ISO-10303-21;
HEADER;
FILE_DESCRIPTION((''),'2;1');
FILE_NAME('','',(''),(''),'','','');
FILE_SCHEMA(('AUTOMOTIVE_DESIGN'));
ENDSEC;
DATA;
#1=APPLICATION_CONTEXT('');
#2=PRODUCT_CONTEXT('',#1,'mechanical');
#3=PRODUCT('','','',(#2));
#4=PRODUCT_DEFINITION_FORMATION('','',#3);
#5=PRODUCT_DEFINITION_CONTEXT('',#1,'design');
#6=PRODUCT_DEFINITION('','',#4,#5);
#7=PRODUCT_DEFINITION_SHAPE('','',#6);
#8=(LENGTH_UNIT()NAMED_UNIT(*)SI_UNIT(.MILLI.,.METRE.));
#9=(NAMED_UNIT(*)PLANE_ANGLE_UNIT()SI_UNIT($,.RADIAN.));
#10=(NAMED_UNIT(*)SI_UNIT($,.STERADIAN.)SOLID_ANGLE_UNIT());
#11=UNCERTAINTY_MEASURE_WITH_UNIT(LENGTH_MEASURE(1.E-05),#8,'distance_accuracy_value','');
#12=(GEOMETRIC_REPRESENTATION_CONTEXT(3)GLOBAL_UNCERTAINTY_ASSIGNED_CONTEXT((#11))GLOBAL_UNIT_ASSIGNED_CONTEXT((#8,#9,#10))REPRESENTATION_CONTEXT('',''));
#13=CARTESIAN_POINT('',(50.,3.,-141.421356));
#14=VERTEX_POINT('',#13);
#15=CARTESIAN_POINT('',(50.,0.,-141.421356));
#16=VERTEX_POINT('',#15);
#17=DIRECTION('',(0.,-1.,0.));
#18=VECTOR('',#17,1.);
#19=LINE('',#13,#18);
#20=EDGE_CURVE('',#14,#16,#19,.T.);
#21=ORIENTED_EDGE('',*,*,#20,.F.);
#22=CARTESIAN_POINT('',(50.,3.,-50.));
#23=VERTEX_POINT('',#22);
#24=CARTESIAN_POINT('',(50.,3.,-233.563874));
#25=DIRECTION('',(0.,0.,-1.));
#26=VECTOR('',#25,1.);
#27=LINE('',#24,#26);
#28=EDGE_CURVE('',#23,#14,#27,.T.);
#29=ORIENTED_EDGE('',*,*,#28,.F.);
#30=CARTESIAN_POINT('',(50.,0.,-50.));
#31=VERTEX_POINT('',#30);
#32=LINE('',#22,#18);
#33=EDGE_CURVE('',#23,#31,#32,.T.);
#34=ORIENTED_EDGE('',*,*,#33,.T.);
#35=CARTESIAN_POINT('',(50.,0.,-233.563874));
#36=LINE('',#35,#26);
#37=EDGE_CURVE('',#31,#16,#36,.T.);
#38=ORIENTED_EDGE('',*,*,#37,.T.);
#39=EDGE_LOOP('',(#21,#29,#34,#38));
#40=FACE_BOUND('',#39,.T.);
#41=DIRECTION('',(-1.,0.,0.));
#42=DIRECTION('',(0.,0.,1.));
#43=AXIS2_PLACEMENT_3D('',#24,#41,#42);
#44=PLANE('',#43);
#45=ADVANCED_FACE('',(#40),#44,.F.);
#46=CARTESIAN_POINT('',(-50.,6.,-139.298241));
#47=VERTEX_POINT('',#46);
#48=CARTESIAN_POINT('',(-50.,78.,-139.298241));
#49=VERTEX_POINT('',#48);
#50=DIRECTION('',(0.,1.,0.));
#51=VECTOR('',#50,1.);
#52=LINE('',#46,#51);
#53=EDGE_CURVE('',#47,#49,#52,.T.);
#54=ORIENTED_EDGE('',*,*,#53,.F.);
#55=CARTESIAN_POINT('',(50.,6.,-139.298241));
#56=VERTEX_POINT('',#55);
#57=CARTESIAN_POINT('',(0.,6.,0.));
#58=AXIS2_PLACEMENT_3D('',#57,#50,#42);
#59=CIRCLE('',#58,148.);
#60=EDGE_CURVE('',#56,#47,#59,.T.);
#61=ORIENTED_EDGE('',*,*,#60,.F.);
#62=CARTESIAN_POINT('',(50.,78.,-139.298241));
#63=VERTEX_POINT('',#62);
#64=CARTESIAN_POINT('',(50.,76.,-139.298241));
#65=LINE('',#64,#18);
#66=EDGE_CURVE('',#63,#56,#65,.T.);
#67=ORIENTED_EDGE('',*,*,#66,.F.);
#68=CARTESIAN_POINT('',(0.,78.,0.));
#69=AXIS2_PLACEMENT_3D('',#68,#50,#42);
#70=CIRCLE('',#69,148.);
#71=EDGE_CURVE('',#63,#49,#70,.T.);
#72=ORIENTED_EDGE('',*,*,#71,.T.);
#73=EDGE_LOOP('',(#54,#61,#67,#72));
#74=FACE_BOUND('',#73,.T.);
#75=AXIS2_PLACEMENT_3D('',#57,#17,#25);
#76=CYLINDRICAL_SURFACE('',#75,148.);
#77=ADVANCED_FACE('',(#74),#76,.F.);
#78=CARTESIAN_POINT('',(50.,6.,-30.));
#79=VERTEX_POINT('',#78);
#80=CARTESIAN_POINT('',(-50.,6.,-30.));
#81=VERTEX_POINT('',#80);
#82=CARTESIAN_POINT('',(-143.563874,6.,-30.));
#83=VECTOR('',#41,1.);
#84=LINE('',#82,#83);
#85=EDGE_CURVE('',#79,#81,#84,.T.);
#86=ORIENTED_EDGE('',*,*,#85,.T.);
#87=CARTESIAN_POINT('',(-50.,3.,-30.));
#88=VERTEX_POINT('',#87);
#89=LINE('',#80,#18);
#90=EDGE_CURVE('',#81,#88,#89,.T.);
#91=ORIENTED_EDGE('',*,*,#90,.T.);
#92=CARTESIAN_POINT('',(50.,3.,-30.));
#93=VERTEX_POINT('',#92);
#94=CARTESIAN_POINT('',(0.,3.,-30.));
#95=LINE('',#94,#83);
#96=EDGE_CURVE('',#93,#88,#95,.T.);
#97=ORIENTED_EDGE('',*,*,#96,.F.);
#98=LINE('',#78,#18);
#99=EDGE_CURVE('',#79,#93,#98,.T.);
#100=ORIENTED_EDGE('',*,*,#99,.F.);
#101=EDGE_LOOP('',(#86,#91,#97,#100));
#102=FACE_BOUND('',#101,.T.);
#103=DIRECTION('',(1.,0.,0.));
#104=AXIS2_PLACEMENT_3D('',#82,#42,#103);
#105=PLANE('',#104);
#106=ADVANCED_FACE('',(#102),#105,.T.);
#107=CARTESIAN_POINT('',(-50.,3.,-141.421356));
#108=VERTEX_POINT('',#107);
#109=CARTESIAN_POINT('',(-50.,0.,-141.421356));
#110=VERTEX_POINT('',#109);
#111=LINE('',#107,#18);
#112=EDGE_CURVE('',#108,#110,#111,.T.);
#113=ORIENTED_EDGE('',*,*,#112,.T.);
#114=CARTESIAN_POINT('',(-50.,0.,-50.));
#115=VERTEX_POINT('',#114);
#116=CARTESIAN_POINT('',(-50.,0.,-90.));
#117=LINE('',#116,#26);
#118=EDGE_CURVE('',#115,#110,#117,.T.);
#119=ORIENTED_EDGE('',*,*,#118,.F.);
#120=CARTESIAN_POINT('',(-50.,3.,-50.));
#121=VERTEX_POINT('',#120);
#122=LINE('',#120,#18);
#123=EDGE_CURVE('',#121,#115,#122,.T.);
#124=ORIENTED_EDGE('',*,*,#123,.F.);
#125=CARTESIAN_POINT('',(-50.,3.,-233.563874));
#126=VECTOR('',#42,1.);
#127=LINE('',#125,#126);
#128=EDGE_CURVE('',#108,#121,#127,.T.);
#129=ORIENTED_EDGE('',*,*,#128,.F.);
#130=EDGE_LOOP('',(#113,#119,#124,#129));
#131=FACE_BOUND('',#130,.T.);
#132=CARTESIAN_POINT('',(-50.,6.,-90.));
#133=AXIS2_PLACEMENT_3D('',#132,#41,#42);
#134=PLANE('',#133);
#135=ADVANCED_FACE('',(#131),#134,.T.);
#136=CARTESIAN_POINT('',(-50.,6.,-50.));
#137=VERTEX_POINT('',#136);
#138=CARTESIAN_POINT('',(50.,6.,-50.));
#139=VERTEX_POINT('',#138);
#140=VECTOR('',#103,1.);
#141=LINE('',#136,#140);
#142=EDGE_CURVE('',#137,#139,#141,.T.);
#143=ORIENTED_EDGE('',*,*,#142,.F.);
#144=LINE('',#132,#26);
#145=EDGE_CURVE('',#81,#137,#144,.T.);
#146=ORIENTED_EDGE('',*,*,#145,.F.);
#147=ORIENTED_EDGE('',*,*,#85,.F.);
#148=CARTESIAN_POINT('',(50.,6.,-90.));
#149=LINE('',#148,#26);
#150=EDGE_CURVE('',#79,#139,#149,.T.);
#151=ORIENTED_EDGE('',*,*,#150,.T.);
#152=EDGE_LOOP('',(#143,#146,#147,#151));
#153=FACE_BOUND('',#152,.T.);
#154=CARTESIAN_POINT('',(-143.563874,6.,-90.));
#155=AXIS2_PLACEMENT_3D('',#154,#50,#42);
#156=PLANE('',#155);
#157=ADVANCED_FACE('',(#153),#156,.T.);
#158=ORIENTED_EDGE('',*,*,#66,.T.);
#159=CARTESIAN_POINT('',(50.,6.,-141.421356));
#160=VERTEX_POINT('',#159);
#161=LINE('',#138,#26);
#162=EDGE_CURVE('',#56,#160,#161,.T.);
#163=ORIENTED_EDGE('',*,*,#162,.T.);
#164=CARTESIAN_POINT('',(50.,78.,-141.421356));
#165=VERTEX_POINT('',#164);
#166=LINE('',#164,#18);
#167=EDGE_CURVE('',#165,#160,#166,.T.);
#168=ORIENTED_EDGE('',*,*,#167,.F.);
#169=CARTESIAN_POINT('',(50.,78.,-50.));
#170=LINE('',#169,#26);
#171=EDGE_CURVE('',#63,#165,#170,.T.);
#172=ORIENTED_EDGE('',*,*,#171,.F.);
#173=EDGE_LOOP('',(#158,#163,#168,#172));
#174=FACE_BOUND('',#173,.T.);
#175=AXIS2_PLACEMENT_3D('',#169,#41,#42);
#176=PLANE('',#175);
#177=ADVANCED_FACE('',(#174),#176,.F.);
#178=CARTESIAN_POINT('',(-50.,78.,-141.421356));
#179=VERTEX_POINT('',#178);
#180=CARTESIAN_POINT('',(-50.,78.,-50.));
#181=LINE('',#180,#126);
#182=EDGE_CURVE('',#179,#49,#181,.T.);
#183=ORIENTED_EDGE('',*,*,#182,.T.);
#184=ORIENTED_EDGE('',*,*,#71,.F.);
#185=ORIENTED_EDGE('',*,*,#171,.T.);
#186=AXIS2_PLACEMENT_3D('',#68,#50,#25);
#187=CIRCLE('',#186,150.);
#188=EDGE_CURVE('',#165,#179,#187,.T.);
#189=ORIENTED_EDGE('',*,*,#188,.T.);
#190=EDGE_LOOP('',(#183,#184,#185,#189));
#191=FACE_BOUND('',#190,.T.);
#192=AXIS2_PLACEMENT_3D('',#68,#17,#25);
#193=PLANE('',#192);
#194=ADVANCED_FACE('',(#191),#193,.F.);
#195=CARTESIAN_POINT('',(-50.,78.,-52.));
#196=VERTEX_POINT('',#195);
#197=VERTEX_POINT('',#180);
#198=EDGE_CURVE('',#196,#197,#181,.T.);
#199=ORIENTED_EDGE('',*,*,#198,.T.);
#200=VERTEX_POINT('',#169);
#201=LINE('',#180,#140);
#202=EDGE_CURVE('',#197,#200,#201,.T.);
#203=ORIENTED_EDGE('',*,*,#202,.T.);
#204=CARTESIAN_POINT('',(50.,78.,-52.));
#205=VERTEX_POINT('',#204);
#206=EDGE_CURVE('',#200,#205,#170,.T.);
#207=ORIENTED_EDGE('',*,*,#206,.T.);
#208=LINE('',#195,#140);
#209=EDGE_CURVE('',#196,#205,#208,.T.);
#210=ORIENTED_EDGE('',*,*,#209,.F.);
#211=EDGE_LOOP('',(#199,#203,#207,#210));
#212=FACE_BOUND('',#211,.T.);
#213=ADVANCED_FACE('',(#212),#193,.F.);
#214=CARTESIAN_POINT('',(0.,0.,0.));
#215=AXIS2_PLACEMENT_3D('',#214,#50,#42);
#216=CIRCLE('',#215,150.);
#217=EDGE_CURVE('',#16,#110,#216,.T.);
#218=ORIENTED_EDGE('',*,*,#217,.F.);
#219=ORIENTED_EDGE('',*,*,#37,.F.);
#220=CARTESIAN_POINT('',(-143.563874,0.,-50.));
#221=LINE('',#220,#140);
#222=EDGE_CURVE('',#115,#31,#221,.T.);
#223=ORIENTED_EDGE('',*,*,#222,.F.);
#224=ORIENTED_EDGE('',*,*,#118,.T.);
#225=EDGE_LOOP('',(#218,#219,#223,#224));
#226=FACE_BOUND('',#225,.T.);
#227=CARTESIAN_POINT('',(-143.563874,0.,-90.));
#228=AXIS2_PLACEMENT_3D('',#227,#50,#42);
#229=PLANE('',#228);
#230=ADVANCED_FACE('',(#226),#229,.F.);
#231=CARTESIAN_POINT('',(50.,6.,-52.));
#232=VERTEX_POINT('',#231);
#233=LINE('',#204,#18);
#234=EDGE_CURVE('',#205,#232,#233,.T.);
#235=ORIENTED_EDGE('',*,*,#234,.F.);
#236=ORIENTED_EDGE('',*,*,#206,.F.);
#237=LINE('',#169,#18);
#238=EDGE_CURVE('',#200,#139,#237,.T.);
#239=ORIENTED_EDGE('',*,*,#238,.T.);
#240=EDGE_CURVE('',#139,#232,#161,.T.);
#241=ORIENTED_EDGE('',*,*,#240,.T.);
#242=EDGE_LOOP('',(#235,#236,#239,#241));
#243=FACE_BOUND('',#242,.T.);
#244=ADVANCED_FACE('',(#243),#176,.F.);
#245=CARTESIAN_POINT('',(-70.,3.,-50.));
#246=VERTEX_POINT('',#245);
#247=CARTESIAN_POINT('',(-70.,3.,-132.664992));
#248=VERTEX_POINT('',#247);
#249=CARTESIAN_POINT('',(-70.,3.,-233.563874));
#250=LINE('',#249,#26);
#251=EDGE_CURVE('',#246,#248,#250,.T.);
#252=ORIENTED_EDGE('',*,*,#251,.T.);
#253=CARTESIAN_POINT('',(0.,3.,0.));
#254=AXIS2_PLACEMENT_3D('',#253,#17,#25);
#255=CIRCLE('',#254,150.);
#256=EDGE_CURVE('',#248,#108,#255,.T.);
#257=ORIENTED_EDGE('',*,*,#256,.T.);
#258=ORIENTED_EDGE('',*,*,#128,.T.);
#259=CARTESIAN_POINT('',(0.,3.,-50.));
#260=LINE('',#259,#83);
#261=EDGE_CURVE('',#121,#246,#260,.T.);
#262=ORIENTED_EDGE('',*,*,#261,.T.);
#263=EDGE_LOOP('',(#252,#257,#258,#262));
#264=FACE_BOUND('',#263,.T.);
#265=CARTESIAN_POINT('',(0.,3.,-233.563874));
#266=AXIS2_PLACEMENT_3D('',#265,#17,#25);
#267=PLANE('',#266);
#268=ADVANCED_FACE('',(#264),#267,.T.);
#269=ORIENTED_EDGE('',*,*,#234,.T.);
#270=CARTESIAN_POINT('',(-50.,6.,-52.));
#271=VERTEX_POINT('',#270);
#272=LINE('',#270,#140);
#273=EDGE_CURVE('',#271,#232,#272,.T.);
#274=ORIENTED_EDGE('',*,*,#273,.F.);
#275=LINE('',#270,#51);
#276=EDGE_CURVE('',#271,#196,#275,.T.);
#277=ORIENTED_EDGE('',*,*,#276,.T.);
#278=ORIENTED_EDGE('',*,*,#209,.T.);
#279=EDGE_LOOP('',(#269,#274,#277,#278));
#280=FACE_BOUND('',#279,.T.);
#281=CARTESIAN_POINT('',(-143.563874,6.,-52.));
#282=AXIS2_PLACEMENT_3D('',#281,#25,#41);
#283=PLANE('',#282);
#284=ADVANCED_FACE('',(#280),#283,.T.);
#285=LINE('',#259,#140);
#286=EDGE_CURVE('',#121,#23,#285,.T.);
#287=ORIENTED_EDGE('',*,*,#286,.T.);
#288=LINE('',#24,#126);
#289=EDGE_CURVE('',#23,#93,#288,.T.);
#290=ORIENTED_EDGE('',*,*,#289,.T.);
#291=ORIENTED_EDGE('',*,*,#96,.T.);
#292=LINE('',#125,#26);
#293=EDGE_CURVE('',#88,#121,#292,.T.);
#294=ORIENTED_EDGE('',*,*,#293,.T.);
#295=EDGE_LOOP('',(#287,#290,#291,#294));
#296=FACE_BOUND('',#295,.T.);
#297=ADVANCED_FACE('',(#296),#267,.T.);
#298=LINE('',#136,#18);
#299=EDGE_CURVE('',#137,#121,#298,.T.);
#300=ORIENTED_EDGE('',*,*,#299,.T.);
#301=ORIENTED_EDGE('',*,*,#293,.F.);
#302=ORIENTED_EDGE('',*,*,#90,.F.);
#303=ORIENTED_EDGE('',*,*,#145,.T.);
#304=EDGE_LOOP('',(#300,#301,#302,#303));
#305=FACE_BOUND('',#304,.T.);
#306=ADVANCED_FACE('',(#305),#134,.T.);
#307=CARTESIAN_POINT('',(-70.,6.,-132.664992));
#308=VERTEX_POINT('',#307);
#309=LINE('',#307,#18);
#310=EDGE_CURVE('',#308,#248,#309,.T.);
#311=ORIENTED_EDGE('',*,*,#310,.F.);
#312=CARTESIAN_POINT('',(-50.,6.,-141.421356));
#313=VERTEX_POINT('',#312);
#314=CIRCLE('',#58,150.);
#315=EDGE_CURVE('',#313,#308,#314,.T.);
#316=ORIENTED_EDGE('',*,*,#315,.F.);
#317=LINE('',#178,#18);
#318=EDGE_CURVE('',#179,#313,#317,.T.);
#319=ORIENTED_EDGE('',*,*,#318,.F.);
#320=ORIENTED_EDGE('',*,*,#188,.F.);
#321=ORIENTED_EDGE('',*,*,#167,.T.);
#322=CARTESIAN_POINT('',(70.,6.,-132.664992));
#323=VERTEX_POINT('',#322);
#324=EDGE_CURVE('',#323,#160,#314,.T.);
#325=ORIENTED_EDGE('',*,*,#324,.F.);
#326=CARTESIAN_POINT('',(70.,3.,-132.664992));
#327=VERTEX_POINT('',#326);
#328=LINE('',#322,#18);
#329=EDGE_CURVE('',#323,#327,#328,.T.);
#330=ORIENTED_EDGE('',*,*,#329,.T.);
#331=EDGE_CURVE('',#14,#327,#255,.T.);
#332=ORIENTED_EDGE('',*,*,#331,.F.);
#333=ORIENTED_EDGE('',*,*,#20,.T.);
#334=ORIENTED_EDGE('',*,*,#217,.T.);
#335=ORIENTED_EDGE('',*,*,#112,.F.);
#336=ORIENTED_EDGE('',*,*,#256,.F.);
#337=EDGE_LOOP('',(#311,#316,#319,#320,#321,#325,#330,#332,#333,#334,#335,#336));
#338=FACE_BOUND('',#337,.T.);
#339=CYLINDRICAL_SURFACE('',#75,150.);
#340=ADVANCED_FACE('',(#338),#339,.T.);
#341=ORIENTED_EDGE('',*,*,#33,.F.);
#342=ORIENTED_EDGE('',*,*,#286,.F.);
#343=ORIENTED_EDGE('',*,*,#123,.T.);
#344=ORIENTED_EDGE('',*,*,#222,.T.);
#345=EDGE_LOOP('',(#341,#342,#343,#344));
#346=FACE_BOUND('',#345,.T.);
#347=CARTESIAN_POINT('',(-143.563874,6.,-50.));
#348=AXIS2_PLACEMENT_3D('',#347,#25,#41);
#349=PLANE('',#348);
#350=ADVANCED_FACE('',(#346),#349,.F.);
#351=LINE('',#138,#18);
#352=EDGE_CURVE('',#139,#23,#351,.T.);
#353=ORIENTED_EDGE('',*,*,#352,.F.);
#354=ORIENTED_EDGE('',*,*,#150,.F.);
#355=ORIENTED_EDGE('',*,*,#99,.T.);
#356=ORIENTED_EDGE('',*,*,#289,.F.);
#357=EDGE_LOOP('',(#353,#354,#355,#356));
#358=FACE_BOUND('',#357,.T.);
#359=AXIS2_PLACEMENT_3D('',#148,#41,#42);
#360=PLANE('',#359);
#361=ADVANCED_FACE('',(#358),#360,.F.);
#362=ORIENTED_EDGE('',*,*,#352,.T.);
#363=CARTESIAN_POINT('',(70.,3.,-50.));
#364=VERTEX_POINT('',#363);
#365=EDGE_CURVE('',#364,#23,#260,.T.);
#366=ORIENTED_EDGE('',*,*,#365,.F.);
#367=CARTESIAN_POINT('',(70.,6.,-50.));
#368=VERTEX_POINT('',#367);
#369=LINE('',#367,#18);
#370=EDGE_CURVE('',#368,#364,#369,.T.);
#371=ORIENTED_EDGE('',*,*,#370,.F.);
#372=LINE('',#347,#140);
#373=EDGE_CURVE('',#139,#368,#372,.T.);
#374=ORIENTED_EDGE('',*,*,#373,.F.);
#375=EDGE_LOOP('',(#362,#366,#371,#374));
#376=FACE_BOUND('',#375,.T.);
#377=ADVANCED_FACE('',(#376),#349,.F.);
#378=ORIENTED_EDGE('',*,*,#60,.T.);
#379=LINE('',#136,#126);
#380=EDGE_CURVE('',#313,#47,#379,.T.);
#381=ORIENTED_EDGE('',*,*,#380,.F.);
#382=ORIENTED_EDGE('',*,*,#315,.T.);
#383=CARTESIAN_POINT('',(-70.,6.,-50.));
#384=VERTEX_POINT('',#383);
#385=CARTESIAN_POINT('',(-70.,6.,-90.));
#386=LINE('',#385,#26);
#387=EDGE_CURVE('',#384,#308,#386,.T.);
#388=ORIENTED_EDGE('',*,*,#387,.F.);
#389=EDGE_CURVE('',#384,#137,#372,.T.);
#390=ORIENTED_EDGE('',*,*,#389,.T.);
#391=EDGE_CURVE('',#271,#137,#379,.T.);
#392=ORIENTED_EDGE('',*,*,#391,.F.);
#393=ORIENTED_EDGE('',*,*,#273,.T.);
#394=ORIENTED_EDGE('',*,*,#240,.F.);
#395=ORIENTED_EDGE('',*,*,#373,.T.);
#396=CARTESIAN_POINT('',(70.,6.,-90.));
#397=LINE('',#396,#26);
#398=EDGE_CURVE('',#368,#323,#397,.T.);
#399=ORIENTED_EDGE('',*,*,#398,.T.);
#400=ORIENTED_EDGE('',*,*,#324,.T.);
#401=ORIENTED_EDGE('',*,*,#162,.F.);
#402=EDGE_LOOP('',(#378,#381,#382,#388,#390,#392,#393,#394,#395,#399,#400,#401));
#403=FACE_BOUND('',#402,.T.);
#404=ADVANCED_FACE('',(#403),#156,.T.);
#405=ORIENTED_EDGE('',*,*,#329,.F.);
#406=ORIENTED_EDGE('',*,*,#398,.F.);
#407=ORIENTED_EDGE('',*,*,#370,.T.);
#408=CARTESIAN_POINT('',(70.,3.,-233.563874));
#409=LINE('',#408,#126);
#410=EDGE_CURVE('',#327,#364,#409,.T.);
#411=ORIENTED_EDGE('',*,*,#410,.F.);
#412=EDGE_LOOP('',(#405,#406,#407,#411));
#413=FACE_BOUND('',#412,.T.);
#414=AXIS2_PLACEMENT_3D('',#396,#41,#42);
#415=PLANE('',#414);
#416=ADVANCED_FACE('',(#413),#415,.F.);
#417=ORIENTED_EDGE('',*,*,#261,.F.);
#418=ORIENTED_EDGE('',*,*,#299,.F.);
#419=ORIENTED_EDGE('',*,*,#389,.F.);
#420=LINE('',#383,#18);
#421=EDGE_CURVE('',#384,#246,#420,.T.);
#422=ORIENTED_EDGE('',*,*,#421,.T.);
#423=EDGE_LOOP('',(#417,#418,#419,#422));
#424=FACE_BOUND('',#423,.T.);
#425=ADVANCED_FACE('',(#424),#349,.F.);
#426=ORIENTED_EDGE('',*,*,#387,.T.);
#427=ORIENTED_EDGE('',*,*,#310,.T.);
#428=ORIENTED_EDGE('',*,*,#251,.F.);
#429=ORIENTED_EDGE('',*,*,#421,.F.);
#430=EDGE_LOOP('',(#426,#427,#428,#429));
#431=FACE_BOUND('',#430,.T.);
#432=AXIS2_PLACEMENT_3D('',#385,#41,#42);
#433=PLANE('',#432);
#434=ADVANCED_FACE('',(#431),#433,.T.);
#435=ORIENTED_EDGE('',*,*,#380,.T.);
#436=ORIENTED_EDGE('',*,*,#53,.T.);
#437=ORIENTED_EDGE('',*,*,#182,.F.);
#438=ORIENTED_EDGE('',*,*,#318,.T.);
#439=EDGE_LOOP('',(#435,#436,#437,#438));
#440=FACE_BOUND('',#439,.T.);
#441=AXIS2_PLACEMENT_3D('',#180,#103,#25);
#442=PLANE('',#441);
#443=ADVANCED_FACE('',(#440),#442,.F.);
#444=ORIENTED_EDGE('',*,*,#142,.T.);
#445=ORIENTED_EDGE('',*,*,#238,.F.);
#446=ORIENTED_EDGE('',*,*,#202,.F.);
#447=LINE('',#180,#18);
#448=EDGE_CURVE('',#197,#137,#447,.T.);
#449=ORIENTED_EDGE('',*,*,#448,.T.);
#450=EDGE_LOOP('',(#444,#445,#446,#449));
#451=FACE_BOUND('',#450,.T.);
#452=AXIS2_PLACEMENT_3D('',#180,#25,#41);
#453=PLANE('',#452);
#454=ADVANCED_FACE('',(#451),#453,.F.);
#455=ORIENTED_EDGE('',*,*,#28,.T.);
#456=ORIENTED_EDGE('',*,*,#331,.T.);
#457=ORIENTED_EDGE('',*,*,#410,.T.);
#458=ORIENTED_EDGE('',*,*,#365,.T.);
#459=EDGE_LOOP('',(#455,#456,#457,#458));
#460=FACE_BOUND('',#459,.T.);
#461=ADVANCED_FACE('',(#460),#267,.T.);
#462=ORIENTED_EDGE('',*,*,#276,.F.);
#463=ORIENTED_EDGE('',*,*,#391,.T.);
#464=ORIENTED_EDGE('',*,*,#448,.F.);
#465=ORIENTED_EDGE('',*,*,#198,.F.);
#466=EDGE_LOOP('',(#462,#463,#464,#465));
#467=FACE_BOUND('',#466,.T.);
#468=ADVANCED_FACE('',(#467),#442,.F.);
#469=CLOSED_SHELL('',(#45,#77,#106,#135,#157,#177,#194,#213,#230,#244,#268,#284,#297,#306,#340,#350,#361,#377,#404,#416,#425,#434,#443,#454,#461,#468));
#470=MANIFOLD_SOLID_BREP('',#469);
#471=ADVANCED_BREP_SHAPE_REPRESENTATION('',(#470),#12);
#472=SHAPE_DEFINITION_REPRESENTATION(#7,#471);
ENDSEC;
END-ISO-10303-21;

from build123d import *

# Parameters (mm, degrees)
SKETCH1_W           = 100
SKETCH1_H           = 20
BOSS_EXTRUDE1_DEPTH = 6
SKETCH2_W           = 100
SKETCH2_H           = 20
CUT_EXTRUDE3_DEPTH  = 3
BOSS_EXTRUDE2_DEPTH = 72
SHELL1_START        = 2
SHELL1_DEPTH        = 74
SHELL1_START_2      = 5
SHELL1_2_DEPTH      = 71
CUT_EXTRUDE4_START  = -72
CUT_EXTRUDE4_DEPTH  = 72
BOSS_EXTRUDE3_DEPTH = 6


# Read off the part's stored shape, not the designer's step: Shell1
with BuildPart() as part:
    # Sketch1 → Boss-Extrude1 (new body)
    with BuildSketch(Plane(origin=(0, 0, 0), x_dir=(1, 0, 0), z_dir=(0, 1, 0))):
        with BuildLine():
            Line((-50, 141.421356237), (-50, 50))
            Line((-50, 50), (50, 50))
            Line((50, 50), (50, 141.421356237))
            ThreePointArc((50, 141.421356237), (0, 150), (-50, 141.421356237))
        make_face()
        with BuildLine():
            Line((-70, 50), (-50, 50))
            Line((-50, 50), (-50, 141.421356237))
            ThreePointArc((-50, 141.421356237), (-60.159525267, 137.407538074), (-70, 132.664991614))
            Line((-70, 132.664991614), (-70, 50))
        make_face()
        with Locations((0, 40)):
            Rectangle(SKETCH1_W, SKETCH1_H)
        with BuildLine():
            Line((50, 141.421356237), (50, 50))
            Line((50, 50), (70, 50))
            Line((70, 50), (70, 132.664991614))
            ThreePointArc((70, 132.664991614), (60.159525267, 137.407538074), (50, 141.421356237))
        make_face()
    extrude(amount=BOSS_EXTRUDE1_DEPTH)

    # Sketch2 → Cut-Extrude3 (cut)
    with BuildSketch(Plane.XZ):
        with BuildLine():
            ThreePointArc((-70, -132.664991614), (-60.159525267, -137.407538074), (-50, -141.421356237))
            Line((-50, -141.421356237), (-50, -50))
            Line((-50, -50), (-70, -50))
            Line((-70, -50), (-70, -132.664991614))
        make_face()
        with Locations((0, -40)):
            Rectangle(SKETCH2_W, SKETCH2_H)
        with BuildLine():
            Line((50, -50), (50, -141.421356237))
            ThreePointArc((50, -141.421356237), (60.159525267, -137.407538074), (70, -132.664991614))
            Line((70, -132.664991614), (70, -50))
            Line((70, -50), (50, -50))
        make_face()
    extrude(amount=-CUT_EXTRUDE3_DEPTH, mode=Mode.SUBTRACT)

    # Sketch3 → Boss-Extrude2 (add)
    with BuildSketch(Plane(origin=(0, 6, 0), x_dir=(-1, 0, 0), z_dir=(0, 1, 0))):
        with BuildLine():
            Line((50, -50), (-50, -50))
            Line((-50, -50), (-50, -141.421356237))
            ThreePointArc((-50, -141.421356237), (0, -150), (50, -141.421356237))
            Line((50, -141.421356237), (50, -50))
        make_face()
    extrude(amount=BOSS_EXTRUDE2_DEPTH)

    # Shell1 outline → Shell1 (cut)
    with BuildSketch(Plane(origin=(0, 0, 0), x_dir=(1, 0, 0), z_dir=(0, 1, 0)).offset(SHELL1_START)):
        with BuildLine():
            Line((48, 52), (48, 140))
            ThreePointArc((48, 140), (0, 148), (-48, 140))
            Line((-48, 140), (-48, 52))
            Line((-48, 52), (48, 52))
        make_face()
    extrude(amount=SHELL1_DEPTH, mode=Mode.SUBTRACT)

    # Shell1 2 outline → Shell1 2 (cut)
    with BuildSketch(Plane(origin=(0, 0, 0), x_dir=(1, 0, 0), z_dir=(0, 1, 0)).offset(SHELL1_START_2)):
        with BuildLine():
            Line((50, 52), (50, 139.298241195))
            ThreePointArc((50, 139.298241195), (49.001256273, 139.652700954), (48, 140))
            Line((48, 140), (48, 52))
            Line((48, 52), (50, 52))
        make_face()
    extrude(amount=SHELL1_2_DEPTH, mode=Mode.SUBTRACT)

    # Sketch4 → Cut-Extrude4 (cut)
    with BuildSketch(Plane(origin=(0, 78, 0), x_dir=(-1, 0, 0), z_dir=(0, 1, 0)).offset(CUT_EXTRUDE4_START)):
        with BuildLine():
            Line((50, -52), (-50, -52))
            Line((-50, -52), (-50, -139.298241195))
            ThreePointArc((-50, -139.298241195), (0, -148), (50, -139.298241195))
            Line((50, -139.298241195), (50, -52))
        make_face()
    extrude(amount=CUT_EXTRUDE4_DEPTH, mode=Mode.SUBTRACT)

    # Sketch5 → Boss-Extrude3 (add)
    with BuildSketch(Plane.XZ):
        with BuildLine():
            Line((-50, -141.421356237), (-50, -50))
            Line((-50, -50), (50, -50))
            Line((50, -50), (50, -141.421356237))
            ThreePointArc((50, -141.421356237), (0, -150), (-50, -141.421356237))
        make_face()
    extrude(amount=-BOSS_EXTRUDE3_DEPTH)


solid = part.part
